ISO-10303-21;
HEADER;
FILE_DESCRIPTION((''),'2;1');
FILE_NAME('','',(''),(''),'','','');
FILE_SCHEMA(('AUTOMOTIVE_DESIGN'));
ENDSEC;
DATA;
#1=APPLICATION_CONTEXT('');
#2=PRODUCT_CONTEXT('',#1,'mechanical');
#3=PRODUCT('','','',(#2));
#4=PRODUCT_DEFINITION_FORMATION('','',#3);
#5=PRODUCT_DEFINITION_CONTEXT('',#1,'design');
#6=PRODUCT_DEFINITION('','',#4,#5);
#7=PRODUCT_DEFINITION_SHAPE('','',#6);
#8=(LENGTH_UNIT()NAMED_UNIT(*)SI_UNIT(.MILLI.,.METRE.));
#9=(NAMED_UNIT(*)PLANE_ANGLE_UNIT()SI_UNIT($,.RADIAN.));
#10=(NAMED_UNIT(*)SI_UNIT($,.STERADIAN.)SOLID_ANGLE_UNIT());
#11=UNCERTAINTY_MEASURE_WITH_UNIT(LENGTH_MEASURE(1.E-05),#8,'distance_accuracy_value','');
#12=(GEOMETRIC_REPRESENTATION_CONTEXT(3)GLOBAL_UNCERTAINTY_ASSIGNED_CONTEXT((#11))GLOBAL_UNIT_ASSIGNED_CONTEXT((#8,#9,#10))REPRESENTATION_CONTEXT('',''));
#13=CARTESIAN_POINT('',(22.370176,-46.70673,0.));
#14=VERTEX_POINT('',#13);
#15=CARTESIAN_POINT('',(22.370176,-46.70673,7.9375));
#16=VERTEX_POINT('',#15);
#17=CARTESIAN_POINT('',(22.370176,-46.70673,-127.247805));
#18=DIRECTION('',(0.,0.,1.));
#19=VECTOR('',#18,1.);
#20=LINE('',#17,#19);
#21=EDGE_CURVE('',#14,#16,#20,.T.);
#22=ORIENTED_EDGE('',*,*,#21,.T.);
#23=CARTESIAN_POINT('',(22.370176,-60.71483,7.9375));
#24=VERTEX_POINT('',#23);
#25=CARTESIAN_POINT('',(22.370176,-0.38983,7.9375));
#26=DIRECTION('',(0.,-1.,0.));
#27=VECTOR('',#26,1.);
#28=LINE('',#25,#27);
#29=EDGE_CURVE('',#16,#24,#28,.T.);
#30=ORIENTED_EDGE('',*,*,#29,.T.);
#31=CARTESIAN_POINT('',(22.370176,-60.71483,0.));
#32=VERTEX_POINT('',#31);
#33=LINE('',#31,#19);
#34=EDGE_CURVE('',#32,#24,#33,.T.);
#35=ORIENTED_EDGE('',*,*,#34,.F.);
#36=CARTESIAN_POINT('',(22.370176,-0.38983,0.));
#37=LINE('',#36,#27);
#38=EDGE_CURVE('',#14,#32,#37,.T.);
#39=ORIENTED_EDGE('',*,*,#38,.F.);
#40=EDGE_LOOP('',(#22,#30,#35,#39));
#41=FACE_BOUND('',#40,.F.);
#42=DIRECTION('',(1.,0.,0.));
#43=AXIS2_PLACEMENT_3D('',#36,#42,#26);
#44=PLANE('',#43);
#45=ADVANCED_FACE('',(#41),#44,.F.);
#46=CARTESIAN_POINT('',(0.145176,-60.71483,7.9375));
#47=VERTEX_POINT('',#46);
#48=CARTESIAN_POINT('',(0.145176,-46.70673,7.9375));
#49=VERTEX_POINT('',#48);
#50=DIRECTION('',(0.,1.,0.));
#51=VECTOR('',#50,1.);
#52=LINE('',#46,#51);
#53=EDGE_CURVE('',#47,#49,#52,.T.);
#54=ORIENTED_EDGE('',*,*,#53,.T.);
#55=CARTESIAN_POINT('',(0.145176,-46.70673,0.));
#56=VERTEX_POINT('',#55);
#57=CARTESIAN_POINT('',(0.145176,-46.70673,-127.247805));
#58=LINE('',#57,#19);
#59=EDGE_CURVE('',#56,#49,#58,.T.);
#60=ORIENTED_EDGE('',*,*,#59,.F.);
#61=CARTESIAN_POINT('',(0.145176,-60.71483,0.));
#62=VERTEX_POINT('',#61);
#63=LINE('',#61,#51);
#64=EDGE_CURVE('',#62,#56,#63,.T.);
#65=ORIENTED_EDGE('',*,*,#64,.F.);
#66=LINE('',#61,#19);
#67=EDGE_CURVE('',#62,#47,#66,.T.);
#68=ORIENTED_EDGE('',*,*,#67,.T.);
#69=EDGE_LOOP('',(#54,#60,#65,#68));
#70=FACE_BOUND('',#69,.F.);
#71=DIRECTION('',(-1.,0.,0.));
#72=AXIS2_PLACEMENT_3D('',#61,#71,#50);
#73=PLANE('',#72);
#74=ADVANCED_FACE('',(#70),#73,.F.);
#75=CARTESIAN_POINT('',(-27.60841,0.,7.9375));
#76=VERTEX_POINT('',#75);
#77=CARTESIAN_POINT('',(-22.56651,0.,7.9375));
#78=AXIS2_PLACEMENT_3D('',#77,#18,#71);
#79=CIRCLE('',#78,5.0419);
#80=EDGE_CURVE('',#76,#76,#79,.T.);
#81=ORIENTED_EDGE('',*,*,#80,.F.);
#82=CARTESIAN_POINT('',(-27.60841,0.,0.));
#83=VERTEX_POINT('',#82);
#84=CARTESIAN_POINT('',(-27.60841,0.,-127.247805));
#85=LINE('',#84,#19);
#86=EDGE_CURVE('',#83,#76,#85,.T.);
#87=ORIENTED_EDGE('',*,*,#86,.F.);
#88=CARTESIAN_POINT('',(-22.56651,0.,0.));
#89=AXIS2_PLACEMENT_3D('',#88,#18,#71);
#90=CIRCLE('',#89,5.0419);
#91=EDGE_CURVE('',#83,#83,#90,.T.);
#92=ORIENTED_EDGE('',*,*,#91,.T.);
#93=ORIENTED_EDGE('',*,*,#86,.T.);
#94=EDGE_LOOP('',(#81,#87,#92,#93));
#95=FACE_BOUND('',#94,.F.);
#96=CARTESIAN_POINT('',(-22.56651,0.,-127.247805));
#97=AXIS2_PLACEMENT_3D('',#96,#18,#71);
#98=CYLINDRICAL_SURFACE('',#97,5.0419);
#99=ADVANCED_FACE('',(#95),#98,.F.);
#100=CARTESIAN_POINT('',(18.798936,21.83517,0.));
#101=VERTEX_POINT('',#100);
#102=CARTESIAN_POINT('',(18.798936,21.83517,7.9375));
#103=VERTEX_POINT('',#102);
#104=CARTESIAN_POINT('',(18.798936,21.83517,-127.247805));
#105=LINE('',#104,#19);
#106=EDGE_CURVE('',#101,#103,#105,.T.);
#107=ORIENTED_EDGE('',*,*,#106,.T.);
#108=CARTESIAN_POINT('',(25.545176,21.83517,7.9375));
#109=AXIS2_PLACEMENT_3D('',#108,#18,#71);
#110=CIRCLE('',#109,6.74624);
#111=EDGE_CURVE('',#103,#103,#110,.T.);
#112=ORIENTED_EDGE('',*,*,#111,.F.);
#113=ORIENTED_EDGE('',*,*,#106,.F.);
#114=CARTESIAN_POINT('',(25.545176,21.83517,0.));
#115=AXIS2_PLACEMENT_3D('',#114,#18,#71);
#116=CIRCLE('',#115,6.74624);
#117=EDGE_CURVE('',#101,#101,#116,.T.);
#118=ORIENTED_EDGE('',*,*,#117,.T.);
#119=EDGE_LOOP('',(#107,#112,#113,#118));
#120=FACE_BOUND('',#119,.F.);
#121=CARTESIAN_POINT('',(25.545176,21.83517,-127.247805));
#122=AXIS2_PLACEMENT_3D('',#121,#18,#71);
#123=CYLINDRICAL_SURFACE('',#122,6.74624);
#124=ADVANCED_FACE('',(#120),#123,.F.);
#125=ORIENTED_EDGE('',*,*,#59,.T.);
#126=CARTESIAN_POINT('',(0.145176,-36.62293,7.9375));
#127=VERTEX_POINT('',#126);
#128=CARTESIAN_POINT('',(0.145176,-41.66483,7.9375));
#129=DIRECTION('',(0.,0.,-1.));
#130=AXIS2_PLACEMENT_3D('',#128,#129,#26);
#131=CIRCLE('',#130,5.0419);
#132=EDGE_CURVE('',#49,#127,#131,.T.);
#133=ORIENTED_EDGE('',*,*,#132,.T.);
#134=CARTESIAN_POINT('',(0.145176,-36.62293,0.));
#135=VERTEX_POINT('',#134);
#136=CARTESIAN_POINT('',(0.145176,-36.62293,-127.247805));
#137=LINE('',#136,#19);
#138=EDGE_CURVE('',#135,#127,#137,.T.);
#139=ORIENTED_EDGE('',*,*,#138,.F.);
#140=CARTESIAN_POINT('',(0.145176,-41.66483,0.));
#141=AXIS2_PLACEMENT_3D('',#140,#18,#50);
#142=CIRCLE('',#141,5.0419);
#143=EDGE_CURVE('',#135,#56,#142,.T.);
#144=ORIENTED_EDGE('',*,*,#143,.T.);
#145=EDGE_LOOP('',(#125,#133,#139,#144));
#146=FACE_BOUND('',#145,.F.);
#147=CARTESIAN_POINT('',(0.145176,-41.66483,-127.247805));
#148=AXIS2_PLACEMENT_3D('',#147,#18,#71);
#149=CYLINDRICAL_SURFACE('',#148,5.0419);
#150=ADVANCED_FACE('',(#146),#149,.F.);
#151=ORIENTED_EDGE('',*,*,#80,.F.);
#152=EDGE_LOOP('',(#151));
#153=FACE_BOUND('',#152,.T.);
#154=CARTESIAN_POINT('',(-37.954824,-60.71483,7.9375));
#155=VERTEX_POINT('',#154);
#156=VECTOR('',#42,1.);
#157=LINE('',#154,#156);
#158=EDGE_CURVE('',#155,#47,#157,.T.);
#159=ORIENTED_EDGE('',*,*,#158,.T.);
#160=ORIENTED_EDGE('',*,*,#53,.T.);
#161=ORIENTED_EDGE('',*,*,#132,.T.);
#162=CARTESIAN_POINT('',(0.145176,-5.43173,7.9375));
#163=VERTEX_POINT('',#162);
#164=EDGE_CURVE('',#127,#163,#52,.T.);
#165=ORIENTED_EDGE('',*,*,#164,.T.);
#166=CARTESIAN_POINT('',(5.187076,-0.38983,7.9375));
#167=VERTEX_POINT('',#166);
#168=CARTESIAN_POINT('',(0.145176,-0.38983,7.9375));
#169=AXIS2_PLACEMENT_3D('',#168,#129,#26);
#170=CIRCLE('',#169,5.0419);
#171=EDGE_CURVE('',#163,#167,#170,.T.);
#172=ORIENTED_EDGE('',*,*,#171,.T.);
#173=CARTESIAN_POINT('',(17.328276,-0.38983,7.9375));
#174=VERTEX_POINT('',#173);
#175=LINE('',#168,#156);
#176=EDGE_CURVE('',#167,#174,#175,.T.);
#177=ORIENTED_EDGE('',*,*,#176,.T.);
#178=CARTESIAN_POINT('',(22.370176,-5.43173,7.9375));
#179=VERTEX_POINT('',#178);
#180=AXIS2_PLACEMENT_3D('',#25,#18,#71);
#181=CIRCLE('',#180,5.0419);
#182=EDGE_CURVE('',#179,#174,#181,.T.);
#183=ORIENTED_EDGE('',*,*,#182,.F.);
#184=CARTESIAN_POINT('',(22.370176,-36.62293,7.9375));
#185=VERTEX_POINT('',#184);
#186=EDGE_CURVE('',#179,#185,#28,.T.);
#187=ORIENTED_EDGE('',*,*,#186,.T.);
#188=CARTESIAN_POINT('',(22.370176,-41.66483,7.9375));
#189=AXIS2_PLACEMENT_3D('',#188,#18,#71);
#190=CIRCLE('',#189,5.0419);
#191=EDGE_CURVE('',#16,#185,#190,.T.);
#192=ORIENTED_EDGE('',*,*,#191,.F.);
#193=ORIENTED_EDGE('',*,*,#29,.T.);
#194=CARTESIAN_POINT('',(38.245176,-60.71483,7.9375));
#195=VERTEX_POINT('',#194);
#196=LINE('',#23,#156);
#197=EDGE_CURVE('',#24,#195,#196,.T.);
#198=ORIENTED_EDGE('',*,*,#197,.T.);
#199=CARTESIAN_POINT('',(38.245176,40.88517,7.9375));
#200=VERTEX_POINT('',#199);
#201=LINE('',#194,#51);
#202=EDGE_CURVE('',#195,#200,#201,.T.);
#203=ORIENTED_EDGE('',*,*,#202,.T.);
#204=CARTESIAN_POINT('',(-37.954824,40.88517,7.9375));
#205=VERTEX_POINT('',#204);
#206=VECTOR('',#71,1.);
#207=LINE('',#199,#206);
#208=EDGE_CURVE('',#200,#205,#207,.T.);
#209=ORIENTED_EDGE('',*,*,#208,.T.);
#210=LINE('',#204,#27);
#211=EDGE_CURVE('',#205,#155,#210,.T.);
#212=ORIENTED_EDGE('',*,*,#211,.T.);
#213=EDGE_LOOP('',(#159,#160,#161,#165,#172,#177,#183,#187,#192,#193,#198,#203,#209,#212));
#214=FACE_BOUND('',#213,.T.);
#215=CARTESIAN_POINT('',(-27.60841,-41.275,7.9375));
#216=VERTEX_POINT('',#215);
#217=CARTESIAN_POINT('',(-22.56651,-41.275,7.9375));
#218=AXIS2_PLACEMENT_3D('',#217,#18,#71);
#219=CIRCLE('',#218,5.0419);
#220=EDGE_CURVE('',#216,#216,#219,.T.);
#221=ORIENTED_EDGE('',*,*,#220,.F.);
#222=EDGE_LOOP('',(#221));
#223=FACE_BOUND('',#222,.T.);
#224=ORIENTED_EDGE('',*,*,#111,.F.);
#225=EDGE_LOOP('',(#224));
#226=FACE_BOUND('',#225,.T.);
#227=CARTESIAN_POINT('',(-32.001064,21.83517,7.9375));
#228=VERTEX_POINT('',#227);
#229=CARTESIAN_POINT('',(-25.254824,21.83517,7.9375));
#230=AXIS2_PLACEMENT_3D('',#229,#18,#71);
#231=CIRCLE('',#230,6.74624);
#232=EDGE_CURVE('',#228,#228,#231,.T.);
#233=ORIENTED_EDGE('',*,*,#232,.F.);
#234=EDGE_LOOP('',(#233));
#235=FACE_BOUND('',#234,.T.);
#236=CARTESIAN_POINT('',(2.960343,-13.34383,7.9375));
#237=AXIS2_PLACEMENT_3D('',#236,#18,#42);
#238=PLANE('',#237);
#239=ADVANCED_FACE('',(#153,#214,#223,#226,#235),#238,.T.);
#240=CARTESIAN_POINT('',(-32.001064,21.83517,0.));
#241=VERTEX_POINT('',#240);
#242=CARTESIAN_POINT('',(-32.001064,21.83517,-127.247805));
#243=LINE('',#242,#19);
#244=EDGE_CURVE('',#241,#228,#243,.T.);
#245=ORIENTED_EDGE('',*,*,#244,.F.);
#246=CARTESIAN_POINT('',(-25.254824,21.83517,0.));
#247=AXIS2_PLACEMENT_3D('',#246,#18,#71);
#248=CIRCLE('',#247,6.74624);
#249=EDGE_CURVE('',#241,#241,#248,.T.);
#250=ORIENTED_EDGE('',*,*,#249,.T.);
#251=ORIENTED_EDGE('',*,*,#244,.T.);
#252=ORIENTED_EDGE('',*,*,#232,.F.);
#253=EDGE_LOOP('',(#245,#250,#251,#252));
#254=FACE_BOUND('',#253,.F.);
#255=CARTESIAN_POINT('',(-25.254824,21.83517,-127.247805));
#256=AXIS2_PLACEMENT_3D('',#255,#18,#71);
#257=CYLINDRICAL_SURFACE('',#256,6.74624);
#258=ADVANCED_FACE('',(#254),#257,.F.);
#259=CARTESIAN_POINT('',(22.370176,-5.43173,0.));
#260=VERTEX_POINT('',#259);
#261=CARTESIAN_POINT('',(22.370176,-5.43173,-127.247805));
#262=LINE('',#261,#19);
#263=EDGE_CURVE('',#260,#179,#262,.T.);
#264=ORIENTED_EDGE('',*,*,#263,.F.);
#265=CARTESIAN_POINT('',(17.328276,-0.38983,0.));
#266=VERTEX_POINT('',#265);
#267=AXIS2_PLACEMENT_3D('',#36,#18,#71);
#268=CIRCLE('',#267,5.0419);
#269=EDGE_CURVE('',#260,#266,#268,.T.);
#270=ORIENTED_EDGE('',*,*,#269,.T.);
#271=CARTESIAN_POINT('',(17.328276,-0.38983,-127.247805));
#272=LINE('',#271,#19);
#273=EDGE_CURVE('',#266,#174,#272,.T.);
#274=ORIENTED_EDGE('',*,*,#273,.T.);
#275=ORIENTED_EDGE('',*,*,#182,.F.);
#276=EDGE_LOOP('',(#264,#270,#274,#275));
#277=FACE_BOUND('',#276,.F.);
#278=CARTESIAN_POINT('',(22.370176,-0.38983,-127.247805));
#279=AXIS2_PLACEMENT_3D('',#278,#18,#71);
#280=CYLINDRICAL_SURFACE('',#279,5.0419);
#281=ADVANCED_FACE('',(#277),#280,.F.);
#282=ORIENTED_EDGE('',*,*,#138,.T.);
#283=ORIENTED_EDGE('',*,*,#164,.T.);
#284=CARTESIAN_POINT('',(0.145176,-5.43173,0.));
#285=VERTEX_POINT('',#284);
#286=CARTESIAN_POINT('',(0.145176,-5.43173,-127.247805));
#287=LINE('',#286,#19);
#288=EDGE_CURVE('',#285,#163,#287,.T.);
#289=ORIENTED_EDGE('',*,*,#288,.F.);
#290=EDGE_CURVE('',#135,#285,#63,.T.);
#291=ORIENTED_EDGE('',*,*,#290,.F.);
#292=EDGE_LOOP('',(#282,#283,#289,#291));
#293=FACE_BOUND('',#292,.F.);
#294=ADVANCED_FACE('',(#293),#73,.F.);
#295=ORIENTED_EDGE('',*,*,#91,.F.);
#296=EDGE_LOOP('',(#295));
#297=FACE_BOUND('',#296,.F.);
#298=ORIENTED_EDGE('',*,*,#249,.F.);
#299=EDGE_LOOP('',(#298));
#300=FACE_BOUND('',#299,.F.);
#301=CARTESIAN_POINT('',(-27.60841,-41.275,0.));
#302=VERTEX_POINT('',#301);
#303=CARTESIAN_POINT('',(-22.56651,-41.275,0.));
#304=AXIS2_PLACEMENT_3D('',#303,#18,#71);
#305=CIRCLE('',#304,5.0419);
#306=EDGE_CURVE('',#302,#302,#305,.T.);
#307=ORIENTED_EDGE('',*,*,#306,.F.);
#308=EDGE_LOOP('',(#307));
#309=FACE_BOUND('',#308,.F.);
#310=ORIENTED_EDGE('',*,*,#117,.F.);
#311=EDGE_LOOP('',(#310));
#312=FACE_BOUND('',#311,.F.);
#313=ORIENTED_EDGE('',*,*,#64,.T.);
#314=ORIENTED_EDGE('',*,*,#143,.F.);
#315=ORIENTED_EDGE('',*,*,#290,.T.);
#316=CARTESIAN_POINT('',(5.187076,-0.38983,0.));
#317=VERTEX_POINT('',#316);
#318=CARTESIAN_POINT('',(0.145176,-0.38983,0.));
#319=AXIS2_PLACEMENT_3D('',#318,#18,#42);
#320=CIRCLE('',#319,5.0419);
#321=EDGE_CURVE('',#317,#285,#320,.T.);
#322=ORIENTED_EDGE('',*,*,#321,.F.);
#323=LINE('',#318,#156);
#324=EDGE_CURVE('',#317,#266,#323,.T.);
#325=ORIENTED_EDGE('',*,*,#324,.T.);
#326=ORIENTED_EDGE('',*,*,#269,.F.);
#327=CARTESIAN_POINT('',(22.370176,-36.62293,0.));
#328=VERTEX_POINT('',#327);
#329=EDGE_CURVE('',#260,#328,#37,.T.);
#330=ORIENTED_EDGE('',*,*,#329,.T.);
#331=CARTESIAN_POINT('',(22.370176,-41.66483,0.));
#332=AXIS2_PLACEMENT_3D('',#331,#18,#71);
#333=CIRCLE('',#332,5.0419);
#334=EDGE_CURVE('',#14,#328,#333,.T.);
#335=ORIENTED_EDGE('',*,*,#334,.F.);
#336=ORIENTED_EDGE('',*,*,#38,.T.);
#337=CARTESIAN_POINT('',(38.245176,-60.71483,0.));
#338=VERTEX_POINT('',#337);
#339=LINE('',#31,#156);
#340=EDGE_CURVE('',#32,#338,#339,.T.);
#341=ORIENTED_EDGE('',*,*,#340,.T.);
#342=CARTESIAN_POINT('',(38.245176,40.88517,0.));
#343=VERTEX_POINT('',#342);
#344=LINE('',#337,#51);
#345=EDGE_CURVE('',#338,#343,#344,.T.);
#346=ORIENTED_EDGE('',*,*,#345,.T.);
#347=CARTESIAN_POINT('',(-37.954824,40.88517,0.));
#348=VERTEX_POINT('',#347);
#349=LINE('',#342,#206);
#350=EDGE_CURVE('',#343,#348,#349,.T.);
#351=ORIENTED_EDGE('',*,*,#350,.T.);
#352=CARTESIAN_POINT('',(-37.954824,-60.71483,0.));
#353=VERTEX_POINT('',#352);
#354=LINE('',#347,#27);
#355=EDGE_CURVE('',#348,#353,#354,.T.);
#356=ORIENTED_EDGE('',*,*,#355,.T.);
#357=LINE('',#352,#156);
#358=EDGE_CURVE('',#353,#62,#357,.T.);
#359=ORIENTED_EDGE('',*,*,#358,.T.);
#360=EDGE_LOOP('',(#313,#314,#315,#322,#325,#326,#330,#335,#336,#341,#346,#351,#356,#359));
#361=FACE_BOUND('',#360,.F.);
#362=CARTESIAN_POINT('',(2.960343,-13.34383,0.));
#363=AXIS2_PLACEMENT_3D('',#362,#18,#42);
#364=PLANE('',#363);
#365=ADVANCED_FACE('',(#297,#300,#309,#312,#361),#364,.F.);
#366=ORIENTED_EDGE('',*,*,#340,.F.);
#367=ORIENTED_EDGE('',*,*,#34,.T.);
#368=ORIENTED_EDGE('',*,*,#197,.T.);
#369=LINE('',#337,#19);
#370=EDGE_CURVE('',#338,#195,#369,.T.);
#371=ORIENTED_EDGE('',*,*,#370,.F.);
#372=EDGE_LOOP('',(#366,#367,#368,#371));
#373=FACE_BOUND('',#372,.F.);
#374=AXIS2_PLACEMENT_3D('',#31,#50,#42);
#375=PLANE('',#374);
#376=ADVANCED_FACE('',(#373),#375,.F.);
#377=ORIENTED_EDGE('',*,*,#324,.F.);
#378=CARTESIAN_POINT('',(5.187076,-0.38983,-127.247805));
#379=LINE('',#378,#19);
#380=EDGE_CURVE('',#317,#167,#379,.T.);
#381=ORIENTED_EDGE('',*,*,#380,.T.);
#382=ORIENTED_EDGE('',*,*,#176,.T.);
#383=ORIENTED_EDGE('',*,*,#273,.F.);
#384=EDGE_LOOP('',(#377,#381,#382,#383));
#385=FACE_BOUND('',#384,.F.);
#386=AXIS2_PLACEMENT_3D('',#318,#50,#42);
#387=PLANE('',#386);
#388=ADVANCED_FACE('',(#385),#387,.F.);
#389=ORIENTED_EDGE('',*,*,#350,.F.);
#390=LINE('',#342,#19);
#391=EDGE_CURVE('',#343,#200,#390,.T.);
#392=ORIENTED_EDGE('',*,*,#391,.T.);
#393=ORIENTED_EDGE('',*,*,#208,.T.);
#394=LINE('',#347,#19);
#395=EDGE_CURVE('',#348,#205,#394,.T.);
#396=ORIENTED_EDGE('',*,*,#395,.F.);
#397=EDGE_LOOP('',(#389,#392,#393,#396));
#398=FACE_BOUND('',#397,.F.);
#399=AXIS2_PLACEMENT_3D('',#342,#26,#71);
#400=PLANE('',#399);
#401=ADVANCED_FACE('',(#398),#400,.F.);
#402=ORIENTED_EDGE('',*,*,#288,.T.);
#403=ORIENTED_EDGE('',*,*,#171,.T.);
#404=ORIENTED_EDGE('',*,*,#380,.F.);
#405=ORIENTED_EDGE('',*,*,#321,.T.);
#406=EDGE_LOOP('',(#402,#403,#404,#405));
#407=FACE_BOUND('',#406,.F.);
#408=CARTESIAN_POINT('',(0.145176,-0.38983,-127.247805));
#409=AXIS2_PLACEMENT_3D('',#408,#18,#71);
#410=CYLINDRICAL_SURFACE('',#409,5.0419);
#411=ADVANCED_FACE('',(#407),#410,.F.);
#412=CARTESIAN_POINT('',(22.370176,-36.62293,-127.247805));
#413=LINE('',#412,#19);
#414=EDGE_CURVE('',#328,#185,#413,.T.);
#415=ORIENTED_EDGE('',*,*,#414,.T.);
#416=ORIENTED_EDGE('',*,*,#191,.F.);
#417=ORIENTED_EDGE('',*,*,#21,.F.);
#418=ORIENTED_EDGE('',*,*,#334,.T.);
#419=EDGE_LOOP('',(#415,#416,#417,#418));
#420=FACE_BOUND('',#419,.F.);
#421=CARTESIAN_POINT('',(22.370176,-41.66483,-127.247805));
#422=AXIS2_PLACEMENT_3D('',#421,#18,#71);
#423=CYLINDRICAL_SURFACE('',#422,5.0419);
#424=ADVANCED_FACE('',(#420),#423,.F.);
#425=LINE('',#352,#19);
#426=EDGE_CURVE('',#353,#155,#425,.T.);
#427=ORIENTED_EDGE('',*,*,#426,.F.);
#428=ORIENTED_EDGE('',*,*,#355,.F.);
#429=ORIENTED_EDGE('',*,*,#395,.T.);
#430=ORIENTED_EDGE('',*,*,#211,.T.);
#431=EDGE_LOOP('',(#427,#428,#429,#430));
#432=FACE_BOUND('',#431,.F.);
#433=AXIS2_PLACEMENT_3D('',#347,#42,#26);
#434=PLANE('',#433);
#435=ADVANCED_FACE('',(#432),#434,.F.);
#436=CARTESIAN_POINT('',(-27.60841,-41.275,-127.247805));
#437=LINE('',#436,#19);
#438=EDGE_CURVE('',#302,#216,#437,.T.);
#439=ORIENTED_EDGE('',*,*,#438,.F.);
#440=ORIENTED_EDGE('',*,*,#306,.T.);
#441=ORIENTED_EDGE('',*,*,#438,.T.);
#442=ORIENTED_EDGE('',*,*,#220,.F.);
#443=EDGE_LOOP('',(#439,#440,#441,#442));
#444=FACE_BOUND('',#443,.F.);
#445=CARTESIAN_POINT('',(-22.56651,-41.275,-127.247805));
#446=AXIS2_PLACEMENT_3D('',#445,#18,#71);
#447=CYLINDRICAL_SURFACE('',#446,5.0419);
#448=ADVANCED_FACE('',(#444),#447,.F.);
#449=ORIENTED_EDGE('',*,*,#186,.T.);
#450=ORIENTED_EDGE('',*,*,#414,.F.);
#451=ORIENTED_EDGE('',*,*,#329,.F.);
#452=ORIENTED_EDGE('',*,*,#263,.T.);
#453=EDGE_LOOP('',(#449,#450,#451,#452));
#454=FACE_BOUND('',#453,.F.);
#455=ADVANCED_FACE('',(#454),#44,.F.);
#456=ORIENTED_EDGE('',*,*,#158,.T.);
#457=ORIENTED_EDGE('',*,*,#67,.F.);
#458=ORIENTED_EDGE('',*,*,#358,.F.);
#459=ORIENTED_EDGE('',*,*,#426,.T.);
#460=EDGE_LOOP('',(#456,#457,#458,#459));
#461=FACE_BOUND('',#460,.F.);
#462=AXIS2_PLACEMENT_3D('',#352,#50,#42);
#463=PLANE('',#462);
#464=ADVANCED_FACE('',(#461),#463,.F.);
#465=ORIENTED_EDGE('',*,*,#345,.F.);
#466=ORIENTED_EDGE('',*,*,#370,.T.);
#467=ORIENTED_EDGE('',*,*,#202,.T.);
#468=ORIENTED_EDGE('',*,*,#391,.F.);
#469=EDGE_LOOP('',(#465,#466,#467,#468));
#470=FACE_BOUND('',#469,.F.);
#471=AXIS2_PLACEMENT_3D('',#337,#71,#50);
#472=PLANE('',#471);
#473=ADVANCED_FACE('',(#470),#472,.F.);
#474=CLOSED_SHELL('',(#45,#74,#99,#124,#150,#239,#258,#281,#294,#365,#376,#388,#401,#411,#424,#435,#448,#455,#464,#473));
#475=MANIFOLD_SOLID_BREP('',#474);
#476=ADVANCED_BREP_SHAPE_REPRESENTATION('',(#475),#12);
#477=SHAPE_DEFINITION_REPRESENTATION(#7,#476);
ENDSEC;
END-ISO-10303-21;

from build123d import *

# Parameters (mm, degrees)
F0_W     = 12.7
F0_H     = 19.05
F1_DEPTH = 7.9375
F2_D     = 10.0838
F3_D     = 13.49248


# Not quite as in the source:
# - a feature names something its author has since deleted; it is built from what else it names


with BuildPart() as f1:
    # F0 (on Top) → F1 (new body)
    with BuildSketch(Plane.XY):
        Polygon((25.5451762405, 40.8851695299), (-25.2548237595, 40.8851695299), (-25.2548237595, 21.8351695299), (-37.9548237595, 21.8351695299), (-37.9548237595, -60.7148304701), (0.1451762405, -60.7148304701), (0.1451762405, -41.6648304701), (0.1451762405, -0.3898304701), (22.3701762405, -0.3898304701), (22.3701762405, -41.6648304701), (22.3701762405, -60.7148304701), (38.2451762405, -60.7148304701), (38.2451762405, 21.8351695299), (25.5451762405, 21.8351695299), align=None)
        with Locations((-31.6048237595, 31.3601695299)):
            Rectangle(F0_W, F0_H)
        with Locations((31.8951762405, 31.3601695299)):
            Rectangle(F0_W, F0_H)
    extrude(amount=F1_DEPTH)

    # F2 (through all)
    with Locations(Plane(origin=(0, 0, 0), x_dir=(1, 0, 0), z_dir=(0, 0, -1))):
        with Locations((0.1451762405, 0.3898304701), (0.1451762405, 41.6648304701), (-22.5665104002, 0), (-22.5665104002, 41.275), (22.3701762405, 41.6648304701), (22.3701762405, 0.3898304701)):
            Hole(F2_D / 2)

    # F3 (through all)
    with Locations(Plane(origin=(0, 0, 0), x_dir=(1, 0, 0), z_dir=(0, 0, -1))):
        with Locations((-25.2548237595, -21.8351695299), (25.5451762405, -21.8351695299)):
            Hole(F3_D / 2)


solid = f1.part
